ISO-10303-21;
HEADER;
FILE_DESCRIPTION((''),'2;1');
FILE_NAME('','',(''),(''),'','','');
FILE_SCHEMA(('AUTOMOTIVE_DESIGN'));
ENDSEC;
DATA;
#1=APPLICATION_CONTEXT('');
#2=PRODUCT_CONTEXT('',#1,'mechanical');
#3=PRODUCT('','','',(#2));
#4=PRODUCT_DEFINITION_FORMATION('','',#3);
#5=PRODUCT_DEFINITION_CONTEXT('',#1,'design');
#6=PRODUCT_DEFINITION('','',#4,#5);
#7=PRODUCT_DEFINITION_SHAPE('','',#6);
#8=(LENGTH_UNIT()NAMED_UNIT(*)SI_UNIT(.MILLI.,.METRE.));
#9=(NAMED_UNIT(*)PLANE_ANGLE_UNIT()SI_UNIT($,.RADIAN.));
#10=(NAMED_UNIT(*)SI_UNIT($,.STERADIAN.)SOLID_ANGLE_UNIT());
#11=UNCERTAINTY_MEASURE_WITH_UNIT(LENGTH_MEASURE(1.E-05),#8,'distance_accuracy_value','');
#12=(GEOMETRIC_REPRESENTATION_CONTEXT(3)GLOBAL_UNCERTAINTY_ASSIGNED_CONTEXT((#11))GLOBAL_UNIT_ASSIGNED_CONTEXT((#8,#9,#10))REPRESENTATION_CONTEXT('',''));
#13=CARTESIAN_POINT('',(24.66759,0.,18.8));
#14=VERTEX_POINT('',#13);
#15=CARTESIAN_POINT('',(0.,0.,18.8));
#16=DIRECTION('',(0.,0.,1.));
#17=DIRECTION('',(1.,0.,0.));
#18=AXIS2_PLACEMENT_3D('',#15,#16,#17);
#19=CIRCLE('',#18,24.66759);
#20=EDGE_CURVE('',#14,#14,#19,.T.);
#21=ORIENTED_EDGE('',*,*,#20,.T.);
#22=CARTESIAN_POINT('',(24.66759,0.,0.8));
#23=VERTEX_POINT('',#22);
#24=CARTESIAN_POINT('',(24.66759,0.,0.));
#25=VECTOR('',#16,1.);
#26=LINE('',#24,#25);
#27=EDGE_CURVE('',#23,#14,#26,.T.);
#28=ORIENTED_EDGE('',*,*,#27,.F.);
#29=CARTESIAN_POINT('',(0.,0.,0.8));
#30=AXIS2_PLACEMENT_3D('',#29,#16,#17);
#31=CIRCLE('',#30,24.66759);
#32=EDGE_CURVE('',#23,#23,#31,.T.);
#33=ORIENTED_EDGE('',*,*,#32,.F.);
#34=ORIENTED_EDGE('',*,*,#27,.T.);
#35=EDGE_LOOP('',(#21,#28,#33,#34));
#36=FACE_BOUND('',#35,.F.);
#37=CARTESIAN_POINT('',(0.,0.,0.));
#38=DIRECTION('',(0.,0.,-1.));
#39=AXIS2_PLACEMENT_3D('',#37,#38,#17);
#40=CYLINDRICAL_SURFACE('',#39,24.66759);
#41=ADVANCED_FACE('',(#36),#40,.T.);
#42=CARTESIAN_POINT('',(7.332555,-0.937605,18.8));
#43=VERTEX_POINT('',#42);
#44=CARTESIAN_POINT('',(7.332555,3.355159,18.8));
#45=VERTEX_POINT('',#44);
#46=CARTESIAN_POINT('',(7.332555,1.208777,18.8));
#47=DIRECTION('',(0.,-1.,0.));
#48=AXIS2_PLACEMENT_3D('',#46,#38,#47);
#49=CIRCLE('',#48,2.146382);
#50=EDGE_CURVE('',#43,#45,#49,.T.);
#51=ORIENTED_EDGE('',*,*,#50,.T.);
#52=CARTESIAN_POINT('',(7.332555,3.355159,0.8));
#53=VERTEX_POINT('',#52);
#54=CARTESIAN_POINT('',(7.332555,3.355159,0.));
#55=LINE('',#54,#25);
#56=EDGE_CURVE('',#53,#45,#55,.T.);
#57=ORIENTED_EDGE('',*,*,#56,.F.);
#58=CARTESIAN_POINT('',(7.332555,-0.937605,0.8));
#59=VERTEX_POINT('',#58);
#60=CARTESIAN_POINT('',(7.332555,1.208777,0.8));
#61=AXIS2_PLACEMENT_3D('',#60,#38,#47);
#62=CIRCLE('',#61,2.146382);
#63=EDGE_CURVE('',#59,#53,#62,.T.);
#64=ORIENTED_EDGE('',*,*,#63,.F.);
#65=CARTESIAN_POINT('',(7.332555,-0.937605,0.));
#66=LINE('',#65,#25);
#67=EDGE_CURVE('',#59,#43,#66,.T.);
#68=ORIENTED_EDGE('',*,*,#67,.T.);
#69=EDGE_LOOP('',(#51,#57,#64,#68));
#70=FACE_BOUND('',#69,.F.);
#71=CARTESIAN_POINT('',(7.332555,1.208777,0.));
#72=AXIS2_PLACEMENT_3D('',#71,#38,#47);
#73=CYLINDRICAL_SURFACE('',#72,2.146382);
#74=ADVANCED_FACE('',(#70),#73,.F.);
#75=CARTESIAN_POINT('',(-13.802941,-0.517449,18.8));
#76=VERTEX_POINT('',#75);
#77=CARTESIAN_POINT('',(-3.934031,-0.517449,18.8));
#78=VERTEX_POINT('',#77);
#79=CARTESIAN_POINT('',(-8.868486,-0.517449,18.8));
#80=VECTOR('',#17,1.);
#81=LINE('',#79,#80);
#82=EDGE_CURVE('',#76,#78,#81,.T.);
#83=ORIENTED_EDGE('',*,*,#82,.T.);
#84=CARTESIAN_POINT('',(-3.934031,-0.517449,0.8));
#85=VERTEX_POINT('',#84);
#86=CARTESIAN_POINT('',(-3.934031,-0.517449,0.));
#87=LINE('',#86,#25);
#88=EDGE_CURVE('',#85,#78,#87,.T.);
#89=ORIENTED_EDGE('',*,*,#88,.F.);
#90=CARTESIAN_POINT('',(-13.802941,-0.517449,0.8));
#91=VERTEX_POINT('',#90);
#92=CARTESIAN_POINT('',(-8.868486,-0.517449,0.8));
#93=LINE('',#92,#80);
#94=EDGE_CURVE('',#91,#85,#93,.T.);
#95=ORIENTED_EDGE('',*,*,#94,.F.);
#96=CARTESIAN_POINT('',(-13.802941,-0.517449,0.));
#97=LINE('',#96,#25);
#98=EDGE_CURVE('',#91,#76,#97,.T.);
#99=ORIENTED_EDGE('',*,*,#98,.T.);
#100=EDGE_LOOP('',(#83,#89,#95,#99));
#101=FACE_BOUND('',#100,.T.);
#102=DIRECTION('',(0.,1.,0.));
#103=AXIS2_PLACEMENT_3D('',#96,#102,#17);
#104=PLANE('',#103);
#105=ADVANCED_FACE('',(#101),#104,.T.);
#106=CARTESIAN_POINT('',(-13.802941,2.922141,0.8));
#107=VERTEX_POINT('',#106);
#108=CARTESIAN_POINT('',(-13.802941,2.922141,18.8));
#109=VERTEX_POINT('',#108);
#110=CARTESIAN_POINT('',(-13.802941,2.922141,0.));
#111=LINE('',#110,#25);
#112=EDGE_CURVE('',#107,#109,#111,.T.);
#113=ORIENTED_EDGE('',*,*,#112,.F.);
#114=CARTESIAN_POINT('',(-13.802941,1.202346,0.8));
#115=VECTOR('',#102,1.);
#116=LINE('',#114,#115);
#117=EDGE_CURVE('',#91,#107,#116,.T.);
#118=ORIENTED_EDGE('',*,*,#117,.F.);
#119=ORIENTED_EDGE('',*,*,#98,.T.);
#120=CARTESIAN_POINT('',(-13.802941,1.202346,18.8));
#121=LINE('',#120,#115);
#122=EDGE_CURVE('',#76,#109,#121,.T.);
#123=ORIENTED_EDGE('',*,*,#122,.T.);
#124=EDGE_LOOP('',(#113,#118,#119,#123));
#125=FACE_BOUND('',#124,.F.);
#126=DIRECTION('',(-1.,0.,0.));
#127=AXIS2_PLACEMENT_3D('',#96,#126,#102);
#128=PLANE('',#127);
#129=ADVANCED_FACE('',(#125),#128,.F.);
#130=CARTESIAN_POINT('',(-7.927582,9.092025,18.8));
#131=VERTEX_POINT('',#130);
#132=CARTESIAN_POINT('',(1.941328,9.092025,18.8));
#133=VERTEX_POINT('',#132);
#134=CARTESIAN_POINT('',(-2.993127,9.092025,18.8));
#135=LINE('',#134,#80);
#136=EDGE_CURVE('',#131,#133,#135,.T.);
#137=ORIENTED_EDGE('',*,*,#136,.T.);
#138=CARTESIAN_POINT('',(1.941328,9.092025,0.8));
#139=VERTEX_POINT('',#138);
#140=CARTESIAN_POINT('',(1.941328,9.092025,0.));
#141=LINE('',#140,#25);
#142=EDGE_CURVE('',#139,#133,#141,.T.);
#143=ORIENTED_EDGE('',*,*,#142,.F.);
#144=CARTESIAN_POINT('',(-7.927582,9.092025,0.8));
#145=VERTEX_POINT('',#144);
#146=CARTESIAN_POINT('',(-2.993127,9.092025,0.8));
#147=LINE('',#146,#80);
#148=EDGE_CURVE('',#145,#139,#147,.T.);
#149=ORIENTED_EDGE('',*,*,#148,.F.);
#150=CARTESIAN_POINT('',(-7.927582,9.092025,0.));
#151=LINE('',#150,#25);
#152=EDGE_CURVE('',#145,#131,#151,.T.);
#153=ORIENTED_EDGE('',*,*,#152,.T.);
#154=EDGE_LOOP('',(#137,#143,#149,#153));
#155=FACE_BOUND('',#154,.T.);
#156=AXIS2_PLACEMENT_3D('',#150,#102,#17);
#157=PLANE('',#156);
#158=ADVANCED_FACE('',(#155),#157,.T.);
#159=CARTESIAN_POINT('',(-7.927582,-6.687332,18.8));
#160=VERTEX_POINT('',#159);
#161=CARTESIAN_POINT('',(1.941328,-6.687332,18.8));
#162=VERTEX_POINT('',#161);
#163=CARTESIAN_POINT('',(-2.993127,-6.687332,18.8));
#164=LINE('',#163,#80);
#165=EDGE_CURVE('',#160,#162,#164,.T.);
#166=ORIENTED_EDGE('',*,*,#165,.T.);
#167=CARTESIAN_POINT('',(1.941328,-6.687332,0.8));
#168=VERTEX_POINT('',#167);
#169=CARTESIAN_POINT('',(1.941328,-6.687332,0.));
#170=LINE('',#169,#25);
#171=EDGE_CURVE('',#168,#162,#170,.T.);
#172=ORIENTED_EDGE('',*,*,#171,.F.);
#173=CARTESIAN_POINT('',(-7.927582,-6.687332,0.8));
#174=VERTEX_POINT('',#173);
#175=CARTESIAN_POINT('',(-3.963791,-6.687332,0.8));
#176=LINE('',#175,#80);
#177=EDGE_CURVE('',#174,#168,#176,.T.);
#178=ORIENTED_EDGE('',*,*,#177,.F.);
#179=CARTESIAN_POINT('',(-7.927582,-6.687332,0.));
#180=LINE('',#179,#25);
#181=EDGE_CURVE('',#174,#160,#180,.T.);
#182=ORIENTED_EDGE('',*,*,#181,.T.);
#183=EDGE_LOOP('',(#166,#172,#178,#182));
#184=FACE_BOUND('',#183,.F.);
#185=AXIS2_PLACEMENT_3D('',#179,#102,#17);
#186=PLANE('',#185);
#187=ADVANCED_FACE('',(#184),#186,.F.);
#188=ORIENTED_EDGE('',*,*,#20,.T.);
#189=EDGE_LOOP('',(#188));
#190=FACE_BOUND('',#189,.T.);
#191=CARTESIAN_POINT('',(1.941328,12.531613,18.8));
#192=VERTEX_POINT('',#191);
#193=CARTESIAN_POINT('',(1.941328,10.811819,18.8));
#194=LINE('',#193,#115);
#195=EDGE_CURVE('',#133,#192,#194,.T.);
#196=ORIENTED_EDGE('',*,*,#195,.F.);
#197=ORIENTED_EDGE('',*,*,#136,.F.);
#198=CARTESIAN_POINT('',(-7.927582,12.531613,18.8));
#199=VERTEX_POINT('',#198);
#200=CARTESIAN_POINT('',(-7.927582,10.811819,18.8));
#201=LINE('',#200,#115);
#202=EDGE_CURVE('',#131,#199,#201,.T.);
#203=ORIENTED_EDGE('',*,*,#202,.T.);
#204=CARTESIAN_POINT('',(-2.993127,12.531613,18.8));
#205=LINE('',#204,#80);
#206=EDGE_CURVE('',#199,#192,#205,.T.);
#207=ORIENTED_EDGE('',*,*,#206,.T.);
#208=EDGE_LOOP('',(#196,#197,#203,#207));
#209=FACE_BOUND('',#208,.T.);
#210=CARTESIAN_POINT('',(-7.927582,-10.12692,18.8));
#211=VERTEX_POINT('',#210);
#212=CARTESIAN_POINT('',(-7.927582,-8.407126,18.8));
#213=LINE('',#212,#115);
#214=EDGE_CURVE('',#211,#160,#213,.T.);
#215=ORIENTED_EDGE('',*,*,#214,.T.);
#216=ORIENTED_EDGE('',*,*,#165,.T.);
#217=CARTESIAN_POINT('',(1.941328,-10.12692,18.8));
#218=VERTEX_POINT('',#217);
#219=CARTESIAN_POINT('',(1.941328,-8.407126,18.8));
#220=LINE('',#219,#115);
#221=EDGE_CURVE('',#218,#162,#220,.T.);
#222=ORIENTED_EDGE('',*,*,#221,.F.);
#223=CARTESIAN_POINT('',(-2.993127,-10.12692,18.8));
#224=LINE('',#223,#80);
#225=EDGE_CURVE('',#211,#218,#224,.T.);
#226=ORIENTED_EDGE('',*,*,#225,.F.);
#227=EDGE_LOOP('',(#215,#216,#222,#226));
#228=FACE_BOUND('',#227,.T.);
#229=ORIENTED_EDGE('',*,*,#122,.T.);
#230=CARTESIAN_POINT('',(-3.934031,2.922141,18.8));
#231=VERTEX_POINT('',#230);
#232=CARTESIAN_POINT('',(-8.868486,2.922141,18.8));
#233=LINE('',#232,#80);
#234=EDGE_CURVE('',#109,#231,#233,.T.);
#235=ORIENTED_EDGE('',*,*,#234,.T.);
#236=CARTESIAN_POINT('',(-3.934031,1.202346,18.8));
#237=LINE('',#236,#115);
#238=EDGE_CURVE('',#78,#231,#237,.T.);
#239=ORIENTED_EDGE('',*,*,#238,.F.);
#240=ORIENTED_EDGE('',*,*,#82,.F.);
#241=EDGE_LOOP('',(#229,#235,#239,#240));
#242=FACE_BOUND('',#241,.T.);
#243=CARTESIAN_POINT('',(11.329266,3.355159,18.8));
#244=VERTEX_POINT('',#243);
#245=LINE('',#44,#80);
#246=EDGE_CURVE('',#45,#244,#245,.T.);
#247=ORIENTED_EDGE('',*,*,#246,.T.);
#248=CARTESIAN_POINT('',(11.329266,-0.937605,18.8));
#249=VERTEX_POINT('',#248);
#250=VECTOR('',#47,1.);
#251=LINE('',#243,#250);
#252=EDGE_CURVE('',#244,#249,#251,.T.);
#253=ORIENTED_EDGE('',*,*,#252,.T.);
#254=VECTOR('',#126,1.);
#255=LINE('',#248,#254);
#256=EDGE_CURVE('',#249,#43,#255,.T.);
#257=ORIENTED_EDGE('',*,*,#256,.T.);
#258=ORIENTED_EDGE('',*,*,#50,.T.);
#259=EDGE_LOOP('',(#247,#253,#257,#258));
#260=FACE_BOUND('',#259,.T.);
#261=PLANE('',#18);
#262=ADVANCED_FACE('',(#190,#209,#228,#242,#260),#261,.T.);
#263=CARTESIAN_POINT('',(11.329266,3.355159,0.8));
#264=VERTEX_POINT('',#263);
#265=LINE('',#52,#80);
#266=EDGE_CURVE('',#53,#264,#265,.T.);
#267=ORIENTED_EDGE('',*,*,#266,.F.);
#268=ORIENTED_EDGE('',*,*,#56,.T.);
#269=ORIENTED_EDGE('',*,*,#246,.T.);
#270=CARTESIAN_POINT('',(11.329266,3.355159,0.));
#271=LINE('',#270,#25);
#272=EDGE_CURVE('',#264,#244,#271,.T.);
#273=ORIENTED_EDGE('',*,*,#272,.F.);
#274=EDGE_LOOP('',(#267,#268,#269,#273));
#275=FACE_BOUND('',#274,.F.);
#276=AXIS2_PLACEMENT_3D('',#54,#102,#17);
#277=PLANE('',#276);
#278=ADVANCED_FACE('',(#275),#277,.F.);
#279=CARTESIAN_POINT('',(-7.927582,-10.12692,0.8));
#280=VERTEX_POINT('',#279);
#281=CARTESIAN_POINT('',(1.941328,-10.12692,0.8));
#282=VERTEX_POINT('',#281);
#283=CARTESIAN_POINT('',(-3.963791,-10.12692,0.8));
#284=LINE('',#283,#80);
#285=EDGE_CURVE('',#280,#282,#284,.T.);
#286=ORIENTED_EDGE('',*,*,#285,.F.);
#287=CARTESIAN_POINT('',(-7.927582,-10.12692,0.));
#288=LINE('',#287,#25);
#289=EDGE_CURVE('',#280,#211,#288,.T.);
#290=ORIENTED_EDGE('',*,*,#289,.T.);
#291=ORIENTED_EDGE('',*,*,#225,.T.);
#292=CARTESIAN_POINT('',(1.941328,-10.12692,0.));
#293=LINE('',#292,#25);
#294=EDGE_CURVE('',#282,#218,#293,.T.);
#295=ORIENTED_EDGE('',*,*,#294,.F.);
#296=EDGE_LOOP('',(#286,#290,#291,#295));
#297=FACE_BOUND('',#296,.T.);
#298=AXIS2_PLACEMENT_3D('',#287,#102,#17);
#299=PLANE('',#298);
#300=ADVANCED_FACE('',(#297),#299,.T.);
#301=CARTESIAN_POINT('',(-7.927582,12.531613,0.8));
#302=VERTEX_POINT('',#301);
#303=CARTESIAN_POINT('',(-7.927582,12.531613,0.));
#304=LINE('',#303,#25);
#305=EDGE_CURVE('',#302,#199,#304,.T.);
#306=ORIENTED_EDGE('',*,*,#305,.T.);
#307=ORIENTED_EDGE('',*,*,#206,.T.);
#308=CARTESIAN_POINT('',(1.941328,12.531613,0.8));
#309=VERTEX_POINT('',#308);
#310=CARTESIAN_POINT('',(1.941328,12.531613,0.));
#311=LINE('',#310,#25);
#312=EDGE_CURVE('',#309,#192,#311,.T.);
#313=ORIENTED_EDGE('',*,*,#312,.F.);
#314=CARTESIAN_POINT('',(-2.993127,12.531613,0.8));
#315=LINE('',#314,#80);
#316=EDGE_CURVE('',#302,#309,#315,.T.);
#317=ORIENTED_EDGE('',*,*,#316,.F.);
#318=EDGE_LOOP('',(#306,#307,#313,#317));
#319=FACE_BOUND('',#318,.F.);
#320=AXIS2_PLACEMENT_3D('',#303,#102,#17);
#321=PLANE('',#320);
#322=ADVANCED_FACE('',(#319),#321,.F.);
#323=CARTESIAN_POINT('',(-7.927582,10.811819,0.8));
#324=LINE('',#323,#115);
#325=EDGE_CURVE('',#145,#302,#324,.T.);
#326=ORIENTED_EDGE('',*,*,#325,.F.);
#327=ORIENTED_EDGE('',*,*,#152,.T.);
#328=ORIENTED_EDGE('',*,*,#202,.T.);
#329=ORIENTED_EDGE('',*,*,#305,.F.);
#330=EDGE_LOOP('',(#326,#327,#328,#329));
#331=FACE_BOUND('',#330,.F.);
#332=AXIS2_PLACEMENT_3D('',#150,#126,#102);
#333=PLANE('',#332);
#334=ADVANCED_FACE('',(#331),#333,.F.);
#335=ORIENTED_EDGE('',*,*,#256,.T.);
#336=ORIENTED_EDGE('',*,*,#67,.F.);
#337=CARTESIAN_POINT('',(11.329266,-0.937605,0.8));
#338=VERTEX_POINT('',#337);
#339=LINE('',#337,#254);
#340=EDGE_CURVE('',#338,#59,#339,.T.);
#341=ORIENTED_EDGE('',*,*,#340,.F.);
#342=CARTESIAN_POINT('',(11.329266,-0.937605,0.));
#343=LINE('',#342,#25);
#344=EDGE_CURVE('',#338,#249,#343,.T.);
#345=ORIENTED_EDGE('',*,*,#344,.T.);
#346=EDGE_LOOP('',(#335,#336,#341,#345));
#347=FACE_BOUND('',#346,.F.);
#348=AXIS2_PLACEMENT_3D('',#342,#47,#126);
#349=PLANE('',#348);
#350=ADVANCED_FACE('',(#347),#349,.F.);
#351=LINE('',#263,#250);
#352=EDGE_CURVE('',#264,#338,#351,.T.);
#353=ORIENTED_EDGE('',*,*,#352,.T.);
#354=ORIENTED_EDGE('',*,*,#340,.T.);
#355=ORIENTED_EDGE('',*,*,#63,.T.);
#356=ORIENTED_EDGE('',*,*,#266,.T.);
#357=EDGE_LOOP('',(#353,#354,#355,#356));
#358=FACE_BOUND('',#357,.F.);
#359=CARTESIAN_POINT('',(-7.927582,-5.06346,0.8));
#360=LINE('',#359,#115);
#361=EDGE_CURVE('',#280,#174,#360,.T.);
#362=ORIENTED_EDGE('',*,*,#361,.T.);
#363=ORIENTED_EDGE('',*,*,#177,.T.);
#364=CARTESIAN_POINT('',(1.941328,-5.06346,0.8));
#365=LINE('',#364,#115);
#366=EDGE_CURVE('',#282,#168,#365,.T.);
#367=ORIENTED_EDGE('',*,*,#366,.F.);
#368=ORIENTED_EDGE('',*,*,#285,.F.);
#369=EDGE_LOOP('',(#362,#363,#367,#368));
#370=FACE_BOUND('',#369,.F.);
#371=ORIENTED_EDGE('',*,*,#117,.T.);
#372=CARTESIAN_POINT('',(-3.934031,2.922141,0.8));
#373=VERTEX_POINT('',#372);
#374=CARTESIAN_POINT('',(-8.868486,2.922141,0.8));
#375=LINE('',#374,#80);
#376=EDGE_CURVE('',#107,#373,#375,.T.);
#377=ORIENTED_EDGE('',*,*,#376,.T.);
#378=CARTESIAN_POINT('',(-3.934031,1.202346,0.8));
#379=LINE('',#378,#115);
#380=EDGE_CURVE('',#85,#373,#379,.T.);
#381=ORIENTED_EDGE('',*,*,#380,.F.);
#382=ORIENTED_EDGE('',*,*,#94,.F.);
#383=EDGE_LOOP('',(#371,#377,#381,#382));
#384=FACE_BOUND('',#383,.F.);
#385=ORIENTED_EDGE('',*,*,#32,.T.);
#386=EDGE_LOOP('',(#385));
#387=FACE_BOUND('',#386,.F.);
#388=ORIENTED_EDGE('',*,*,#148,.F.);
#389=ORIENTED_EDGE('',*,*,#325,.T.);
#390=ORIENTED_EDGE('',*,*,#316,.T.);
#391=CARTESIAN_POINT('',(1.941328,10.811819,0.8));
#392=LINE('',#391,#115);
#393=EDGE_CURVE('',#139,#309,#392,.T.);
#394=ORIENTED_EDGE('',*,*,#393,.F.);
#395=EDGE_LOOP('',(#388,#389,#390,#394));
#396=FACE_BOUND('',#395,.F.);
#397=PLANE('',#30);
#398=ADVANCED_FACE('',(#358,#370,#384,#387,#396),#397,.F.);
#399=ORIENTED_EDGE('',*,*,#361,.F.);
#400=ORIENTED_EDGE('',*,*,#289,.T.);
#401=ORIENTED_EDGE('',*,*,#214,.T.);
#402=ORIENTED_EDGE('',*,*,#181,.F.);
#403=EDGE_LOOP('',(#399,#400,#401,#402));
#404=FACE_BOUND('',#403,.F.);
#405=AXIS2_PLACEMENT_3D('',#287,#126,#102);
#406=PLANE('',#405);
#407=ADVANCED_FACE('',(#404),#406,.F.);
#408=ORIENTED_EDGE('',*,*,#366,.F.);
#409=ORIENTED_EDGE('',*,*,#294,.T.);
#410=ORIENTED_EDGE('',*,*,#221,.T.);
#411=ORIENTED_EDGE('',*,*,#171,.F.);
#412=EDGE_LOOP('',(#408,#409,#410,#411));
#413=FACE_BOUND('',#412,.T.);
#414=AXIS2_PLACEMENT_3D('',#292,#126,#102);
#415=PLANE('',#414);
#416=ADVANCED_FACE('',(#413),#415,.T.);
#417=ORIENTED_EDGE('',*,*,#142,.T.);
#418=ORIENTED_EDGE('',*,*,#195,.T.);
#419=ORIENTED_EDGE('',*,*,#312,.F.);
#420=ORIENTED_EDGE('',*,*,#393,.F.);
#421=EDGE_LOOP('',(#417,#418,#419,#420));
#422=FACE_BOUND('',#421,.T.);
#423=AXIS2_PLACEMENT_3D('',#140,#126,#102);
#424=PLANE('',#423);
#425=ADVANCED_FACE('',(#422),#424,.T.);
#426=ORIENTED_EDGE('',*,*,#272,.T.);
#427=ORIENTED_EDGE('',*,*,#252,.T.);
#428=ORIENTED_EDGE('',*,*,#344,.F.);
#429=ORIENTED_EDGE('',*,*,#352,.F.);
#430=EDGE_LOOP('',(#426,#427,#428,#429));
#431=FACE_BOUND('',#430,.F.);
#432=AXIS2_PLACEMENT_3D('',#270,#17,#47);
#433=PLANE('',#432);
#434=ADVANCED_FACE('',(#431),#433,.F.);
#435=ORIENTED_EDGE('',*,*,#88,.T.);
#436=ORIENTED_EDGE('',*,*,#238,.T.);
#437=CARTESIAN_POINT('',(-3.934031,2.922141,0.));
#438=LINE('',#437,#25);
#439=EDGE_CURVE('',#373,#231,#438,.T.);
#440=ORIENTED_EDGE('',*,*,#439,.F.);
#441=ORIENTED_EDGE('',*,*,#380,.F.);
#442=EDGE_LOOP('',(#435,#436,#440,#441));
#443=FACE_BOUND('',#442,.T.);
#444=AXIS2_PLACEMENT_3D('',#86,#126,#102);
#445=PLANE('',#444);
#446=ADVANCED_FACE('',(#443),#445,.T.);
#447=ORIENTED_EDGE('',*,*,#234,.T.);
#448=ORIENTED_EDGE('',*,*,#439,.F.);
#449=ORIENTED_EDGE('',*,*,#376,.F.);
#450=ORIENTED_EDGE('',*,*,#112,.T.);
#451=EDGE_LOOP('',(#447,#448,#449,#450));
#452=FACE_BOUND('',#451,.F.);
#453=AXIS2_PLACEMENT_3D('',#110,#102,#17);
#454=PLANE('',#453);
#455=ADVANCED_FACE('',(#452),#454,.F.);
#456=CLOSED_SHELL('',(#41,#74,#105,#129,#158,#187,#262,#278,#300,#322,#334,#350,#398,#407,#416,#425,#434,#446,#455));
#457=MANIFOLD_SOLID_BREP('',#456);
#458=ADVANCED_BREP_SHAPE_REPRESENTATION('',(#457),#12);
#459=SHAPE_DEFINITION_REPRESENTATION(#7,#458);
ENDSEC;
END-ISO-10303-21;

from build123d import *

# Parameters (mm, degrees)
F0_R     = 24.66759
F0_W     = 9.8689098377
F0_H     = 3.4395875409
F0_W_2   = 9.86891
F0_H_2   = 3.43959
F1_DEPTH = 18.8
F2_DEPTH = 0.8


# Not quite as in the source:
# - a feature names something its author has since deleted; it is built from what else it names


with BuildPart() as f1:
    # F0 (on Top) → F1 (new body)
    with BuildSketch(Plane.XY):
        Circle(F0_R)
        with Locations((-2.9931267491, -8.4071261808)):
            Rectangle(F0_W, F0_H, mode=Mode.SUBTRACT)
        with Locations((-8.8684857703, 1.2023462914)):
            Rectangle(F0_W_2, F0_H_2, mode=Mode.SUBTRACT)
        with Locations((-2.9931267491, 10.8118187636)):
            Rectangle(F0_W, F0_H, mode=Mode.SUBTRACT)
        with BuildLine():
            Line((11.3292662427, 3.3551587258), (11.3292662427, -0.9376045782))
            Line((11.3292662427, -0.9376045782), (7.332555484, -0.9376045782))
            ThreePointArc((7.332555484, -0.9376045782), (5.186173832, 1.2087770738), (7.332555484, 3.3551587258))
            Line((7.332555484, 3.3551587258), (11.3292662427, 3.3551587258))
        make_face(mode=Mode.SUBTRACT)
    extrude(amount=F1_DEPTH)

    # F0 (on Top) → F2 (cut)
    with BuildSketch(Plane.XY):
        Circle(F0_R)
        with Locations((-2.9931267491, -8.4071261808)):
            Rectangle(F0_W, F0_H, mode=Mode.SUBTRACT)
        with Locations((-8.8684857703, 1.2023462914)):
            Rectangle(F0_W_2, F0_H_2, mode=Mode.SUBTRACT)
        with Locations((-2.9931267491, 10.8118187636)):
            Rectangle(F0_W, F0_H, mode=Mode.SUBTRACT)
        with BuildLine():
            Line((11.3292662427, 3.3551587258), (11.3292662427, -0.9376045782))
            Line((11.3292662427, -0.9376045782), (7.332555484, -0.9376045782))
            ThreePointArc((7.332555484, -0.9376045782), (5.186173832, 1.2087770738), (7.332555484, 3.3551587258))
            Line((7.332555484, 3.3551587258), (11.3292662427, 3.3551587258))
        make_face(mode=Mode.SUBTRACT)
        with Locations((-2.9931267491, -8.4071261808)):
            Rectangle(F0_W, F0_H)
    extrude(amount=F2_DEPTH, mode=Mode.SUBTRACT)


solid = f1.part
